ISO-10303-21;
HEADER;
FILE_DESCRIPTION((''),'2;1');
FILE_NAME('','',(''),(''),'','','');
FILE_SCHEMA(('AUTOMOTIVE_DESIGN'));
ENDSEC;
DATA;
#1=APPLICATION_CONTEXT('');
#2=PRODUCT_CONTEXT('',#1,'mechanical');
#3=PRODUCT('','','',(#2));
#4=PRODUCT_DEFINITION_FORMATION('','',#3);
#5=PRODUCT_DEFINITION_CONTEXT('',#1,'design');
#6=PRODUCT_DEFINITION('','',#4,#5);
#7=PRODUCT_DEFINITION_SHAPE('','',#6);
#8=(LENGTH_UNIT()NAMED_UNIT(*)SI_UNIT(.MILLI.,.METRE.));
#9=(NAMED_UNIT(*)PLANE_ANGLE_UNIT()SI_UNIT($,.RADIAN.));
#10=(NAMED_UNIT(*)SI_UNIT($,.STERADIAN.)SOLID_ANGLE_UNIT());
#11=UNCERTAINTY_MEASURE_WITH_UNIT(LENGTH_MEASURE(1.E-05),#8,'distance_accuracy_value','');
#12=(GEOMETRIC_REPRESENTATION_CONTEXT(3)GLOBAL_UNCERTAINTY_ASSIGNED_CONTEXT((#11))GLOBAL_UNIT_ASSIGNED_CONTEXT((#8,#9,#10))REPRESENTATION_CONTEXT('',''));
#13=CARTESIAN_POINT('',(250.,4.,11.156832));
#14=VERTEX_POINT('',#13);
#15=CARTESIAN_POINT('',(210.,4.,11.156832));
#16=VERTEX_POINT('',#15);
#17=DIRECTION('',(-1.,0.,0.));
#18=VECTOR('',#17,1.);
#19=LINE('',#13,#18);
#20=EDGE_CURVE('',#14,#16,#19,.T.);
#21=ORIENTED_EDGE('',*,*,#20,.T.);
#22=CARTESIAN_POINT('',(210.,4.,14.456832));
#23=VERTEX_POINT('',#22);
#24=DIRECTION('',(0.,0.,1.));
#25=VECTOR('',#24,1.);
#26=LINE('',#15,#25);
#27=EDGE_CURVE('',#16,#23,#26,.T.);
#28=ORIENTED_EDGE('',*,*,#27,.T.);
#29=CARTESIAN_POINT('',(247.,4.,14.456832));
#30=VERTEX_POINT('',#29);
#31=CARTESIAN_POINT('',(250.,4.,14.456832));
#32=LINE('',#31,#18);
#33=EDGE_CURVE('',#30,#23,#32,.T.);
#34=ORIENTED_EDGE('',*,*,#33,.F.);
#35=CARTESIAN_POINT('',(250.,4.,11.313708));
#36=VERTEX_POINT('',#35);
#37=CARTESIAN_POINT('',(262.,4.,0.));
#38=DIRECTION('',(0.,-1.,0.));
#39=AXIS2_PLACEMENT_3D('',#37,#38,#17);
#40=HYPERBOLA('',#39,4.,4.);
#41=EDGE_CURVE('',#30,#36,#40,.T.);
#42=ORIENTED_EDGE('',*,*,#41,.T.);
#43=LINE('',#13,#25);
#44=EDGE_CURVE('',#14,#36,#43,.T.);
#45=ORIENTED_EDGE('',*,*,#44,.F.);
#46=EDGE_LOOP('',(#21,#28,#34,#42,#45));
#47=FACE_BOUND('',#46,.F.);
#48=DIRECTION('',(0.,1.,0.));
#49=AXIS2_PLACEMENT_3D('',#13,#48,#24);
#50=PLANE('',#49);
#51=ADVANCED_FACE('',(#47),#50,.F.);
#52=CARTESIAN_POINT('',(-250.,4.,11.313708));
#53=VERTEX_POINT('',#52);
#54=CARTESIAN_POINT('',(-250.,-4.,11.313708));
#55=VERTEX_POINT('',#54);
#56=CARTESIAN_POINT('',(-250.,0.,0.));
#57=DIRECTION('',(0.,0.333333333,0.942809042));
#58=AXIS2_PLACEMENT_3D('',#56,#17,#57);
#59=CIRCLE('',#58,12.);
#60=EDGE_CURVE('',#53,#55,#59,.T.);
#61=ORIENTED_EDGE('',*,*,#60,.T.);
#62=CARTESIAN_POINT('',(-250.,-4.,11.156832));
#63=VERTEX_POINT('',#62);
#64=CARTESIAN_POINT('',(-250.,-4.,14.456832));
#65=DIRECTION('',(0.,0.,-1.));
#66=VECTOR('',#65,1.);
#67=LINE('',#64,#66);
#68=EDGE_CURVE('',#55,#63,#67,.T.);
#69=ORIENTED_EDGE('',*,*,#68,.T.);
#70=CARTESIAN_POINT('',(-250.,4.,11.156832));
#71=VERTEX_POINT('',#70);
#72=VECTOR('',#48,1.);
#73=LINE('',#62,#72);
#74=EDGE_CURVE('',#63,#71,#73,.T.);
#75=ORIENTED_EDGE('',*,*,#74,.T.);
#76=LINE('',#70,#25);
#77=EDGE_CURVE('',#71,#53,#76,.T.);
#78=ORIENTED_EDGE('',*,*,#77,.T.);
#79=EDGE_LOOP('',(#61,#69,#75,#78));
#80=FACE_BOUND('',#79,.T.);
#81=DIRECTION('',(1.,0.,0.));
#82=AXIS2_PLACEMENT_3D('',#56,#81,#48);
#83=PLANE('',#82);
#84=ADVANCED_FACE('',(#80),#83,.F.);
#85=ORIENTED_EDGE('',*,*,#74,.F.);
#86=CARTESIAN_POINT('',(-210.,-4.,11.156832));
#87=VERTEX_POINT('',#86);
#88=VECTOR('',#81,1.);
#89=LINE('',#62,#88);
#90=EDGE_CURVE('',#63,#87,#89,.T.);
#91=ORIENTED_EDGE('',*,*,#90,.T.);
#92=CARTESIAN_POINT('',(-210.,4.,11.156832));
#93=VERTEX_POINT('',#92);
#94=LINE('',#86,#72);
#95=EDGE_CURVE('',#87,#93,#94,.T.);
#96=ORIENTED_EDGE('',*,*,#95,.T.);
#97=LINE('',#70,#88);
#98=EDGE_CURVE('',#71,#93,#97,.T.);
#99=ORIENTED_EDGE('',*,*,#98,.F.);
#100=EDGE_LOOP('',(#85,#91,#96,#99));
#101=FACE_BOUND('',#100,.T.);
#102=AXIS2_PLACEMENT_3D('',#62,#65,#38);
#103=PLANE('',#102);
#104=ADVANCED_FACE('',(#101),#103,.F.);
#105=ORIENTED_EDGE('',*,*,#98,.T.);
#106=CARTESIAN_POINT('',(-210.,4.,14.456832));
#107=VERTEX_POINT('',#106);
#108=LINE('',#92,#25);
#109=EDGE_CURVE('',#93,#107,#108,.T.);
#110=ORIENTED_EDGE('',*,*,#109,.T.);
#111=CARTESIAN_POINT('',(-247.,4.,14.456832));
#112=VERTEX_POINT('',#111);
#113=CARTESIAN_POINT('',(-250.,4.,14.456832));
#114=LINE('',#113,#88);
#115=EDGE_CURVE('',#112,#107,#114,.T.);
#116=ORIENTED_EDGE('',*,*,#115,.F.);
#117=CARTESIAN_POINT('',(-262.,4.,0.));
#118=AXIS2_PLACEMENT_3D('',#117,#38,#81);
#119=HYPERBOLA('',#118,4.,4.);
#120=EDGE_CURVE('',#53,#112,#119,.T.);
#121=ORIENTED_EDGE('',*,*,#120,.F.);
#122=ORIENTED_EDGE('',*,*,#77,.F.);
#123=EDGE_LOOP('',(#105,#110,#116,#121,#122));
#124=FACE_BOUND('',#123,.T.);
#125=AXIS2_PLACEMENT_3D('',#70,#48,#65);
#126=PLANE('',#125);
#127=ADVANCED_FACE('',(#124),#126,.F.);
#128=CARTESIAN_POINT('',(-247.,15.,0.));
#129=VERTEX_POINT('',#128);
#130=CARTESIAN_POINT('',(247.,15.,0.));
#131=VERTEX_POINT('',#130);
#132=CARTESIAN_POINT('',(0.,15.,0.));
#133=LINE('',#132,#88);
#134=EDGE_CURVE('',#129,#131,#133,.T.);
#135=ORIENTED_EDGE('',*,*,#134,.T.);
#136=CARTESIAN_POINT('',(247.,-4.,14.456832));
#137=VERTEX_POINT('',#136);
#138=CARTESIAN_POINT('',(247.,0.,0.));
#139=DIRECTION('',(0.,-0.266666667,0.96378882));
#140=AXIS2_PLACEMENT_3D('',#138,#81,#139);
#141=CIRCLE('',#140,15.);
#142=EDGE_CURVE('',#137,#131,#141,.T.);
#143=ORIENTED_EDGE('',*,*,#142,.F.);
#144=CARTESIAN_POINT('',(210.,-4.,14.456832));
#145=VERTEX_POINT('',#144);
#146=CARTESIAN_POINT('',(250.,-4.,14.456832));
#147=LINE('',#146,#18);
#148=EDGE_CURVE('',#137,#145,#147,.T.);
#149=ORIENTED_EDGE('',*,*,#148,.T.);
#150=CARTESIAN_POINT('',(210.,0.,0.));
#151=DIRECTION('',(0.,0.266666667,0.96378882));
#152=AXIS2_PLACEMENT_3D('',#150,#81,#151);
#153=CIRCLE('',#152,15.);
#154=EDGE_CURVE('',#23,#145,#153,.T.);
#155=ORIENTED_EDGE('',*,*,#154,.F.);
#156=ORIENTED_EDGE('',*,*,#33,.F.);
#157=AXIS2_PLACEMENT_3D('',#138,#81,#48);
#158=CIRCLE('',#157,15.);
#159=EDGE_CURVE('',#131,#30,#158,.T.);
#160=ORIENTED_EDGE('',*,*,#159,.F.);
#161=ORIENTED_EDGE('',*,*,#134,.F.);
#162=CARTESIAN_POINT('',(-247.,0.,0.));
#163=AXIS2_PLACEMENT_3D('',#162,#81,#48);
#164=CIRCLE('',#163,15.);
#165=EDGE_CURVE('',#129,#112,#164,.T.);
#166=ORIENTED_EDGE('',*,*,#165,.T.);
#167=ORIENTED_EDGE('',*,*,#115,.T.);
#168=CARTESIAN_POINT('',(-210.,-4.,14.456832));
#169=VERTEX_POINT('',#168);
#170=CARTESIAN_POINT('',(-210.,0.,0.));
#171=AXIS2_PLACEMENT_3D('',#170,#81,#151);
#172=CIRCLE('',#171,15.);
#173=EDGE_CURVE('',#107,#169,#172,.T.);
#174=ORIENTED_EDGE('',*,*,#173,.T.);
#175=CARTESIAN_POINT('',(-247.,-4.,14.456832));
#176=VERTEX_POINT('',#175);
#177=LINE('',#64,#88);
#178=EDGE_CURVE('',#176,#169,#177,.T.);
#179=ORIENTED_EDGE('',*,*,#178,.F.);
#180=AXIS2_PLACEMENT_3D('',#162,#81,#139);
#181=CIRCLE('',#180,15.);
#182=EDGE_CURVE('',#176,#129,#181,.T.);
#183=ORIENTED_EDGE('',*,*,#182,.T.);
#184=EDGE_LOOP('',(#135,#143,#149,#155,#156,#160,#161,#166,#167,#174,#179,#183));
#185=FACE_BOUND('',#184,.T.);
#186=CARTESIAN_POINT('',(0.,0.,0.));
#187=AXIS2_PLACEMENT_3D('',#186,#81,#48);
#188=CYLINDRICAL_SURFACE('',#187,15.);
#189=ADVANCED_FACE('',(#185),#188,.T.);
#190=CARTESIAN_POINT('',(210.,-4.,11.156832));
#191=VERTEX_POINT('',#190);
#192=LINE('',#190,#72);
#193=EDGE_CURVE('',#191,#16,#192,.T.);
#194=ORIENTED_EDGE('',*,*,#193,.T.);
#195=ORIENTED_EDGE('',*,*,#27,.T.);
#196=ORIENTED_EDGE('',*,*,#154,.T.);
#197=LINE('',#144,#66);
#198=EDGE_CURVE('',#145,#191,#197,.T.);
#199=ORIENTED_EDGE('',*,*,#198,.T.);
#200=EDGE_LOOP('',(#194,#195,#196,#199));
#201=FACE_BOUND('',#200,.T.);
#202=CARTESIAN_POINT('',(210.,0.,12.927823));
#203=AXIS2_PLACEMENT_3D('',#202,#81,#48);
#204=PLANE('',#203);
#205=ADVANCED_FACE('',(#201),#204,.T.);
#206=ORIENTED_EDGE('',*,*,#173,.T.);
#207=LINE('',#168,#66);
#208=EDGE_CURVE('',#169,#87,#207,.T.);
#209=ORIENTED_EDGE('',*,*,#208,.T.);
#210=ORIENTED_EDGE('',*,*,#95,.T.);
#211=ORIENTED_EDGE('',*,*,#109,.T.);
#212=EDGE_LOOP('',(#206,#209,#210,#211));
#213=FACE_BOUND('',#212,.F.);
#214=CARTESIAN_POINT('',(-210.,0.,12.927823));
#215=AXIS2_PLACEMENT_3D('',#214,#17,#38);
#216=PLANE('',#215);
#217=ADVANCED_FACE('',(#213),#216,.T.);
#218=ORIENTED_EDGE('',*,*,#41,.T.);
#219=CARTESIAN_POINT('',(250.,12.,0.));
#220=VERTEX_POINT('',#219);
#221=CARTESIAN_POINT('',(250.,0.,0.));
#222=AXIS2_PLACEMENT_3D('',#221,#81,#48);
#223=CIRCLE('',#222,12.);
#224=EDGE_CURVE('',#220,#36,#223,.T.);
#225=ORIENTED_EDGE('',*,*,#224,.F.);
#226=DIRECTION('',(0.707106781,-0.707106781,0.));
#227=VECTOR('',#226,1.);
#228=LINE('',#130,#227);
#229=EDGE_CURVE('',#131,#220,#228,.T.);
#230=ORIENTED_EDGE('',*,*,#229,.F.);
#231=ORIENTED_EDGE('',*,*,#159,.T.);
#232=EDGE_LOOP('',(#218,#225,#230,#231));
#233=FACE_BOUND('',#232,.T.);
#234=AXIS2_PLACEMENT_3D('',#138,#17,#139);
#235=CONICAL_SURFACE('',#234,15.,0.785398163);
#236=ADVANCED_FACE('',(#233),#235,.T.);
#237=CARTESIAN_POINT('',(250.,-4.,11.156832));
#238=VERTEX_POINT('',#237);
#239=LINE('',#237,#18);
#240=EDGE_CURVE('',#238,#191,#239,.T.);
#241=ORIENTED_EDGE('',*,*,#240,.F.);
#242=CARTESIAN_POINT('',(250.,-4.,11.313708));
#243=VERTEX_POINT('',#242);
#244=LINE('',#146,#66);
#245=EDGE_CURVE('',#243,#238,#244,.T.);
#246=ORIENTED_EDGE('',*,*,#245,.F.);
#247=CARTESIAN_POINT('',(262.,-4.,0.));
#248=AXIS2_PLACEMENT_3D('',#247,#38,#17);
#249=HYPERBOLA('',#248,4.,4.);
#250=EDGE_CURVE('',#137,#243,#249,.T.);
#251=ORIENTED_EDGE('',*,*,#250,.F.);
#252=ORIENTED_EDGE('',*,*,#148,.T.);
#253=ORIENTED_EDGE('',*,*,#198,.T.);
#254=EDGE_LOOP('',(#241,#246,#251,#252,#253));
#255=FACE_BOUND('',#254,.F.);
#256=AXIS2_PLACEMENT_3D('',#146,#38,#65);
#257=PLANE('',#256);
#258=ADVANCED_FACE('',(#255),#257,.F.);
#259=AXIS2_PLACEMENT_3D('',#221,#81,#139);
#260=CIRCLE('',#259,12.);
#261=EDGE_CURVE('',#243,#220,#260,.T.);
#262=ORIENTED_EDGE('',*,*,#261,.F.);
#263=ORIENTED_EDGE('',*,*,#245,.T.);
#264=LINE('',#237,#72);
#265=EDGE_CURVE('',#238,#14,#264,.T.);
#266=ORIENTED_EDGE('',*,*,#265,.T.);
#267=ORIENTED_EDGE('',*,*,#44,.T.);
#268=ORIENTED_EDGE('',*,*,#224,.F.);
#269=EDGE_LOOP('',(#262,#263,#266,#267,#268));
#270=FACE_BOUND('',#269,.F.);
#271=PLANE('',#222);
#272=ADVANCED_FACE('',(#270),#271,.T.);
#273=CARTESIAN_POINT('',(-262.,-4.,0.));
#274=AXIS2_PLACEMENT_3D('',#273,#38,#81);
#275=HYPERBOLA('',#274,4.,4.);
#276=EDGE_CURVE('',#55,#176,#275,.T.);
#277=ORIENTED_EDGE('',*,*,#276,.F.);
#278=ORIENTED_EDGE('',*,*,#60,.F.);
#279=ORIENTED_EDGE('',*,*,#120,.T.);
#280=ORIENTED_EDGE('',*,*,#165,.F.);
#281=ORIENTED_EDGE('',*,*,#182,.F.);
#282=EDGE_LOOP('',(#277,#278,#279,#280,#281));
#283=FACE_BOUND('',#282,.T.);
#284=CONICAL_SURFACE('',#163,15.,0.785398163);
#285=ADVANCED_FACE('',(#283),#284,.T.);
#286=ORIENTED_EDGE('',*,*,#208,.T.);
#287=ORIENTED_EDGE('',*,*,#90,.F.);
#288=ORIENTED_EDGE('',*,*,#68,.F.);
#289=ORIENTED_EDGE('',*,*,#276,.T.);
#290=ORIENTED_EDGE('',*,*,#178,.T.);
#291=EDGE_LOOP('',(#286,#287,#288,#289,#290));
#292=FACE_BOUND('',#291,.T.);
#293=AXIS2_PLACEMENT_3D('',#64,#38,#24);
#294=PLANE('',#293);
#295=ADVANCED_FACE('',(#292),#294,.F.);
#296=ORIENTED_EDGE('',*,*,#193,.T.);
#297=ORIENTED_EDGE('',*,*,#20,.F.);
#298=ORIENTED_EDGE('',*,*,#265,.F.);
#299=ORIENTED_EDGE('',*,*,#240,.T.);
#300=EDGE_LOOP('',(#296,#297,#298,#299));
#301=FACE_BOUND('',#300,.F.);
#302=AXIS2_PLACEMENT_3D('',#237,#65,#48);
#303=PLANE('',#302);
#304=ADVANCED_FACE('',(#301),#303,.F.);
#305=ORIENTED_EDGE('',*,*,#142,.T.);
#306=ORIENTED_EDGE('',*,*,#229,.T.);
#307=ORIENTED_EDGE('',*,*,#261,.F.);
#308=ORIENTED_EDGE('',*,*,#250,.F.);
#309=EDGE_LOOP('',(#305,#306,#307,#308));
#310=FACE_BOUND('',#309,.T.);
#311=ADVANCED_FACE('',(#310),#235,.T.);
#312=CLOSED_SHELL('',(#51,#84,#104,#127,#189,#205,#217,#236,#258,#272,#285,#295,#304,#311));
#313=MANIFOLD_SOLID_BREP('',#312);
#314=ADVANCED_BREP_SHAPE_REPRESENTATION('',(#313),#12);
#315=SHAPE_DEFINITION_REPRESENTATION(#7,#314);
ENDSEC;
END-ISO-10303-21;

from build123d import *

# Parameters (mm, degrees)
F0_W     = 500
F0_H     = 15
F3_DEPTH = 40
F4_SIZE2 = 3
F4_SIZE  = 3


# Not quite as in the source:
# - a pattern or mirror of a feature is missing from the dataset's text; its kind, count and spacing are read off the source's solid


with BuildPart() as f1:
    # F0 (on Top) → F1 (revolve)
    with BuildSketch(Plane.XY):
        with Locations((0, 7.5)):
            Rectangle(F0_W, F0_H)
    revolve(axis=Axis((0, 0, 0), (1, 0, 0)))

    # F2 (on face) → F3 (cut)
    with BuildSketch(Plane.YZ.offset(250)):
        with BuildLine():
            ThreePointArc((4, 14.4568322948), (0, 15), (-4, 14.4568322948))
            Line((-4, 14.4568322948), (-4, 11.1568322948))
            Line((-4, 11.1568322948), (4, 11.1568322948))
            Line((4, 11.1568322948), (4, 14.4568322948))
        make_face()
    f3 = extrude(amount=-F3_DEPTH, mode=Mode.SUBTRACT)

    # F3_copies: F3 across plane
    add(f3.mirror(Plane(origin=(0, 0, 0), x_dir=(0, 0, -1), z_dir=(-1, 0, 0))), mode=Mode.SUBTRACT)

    # F4
    f4_edges = [f1.edges().sort_by_distance(p)[0] for p in [
        (250, -9.082951, -11.937336),
        (250, 11.937336, 9.082951),
        (-250, 11.937336, 9.082951),
        (-250, -9.082951, -11.937336),
    ]]
    chamfer(f4_edges, length=F4_SIZE, length2=F4_SIZE2)


solid = f1.part
